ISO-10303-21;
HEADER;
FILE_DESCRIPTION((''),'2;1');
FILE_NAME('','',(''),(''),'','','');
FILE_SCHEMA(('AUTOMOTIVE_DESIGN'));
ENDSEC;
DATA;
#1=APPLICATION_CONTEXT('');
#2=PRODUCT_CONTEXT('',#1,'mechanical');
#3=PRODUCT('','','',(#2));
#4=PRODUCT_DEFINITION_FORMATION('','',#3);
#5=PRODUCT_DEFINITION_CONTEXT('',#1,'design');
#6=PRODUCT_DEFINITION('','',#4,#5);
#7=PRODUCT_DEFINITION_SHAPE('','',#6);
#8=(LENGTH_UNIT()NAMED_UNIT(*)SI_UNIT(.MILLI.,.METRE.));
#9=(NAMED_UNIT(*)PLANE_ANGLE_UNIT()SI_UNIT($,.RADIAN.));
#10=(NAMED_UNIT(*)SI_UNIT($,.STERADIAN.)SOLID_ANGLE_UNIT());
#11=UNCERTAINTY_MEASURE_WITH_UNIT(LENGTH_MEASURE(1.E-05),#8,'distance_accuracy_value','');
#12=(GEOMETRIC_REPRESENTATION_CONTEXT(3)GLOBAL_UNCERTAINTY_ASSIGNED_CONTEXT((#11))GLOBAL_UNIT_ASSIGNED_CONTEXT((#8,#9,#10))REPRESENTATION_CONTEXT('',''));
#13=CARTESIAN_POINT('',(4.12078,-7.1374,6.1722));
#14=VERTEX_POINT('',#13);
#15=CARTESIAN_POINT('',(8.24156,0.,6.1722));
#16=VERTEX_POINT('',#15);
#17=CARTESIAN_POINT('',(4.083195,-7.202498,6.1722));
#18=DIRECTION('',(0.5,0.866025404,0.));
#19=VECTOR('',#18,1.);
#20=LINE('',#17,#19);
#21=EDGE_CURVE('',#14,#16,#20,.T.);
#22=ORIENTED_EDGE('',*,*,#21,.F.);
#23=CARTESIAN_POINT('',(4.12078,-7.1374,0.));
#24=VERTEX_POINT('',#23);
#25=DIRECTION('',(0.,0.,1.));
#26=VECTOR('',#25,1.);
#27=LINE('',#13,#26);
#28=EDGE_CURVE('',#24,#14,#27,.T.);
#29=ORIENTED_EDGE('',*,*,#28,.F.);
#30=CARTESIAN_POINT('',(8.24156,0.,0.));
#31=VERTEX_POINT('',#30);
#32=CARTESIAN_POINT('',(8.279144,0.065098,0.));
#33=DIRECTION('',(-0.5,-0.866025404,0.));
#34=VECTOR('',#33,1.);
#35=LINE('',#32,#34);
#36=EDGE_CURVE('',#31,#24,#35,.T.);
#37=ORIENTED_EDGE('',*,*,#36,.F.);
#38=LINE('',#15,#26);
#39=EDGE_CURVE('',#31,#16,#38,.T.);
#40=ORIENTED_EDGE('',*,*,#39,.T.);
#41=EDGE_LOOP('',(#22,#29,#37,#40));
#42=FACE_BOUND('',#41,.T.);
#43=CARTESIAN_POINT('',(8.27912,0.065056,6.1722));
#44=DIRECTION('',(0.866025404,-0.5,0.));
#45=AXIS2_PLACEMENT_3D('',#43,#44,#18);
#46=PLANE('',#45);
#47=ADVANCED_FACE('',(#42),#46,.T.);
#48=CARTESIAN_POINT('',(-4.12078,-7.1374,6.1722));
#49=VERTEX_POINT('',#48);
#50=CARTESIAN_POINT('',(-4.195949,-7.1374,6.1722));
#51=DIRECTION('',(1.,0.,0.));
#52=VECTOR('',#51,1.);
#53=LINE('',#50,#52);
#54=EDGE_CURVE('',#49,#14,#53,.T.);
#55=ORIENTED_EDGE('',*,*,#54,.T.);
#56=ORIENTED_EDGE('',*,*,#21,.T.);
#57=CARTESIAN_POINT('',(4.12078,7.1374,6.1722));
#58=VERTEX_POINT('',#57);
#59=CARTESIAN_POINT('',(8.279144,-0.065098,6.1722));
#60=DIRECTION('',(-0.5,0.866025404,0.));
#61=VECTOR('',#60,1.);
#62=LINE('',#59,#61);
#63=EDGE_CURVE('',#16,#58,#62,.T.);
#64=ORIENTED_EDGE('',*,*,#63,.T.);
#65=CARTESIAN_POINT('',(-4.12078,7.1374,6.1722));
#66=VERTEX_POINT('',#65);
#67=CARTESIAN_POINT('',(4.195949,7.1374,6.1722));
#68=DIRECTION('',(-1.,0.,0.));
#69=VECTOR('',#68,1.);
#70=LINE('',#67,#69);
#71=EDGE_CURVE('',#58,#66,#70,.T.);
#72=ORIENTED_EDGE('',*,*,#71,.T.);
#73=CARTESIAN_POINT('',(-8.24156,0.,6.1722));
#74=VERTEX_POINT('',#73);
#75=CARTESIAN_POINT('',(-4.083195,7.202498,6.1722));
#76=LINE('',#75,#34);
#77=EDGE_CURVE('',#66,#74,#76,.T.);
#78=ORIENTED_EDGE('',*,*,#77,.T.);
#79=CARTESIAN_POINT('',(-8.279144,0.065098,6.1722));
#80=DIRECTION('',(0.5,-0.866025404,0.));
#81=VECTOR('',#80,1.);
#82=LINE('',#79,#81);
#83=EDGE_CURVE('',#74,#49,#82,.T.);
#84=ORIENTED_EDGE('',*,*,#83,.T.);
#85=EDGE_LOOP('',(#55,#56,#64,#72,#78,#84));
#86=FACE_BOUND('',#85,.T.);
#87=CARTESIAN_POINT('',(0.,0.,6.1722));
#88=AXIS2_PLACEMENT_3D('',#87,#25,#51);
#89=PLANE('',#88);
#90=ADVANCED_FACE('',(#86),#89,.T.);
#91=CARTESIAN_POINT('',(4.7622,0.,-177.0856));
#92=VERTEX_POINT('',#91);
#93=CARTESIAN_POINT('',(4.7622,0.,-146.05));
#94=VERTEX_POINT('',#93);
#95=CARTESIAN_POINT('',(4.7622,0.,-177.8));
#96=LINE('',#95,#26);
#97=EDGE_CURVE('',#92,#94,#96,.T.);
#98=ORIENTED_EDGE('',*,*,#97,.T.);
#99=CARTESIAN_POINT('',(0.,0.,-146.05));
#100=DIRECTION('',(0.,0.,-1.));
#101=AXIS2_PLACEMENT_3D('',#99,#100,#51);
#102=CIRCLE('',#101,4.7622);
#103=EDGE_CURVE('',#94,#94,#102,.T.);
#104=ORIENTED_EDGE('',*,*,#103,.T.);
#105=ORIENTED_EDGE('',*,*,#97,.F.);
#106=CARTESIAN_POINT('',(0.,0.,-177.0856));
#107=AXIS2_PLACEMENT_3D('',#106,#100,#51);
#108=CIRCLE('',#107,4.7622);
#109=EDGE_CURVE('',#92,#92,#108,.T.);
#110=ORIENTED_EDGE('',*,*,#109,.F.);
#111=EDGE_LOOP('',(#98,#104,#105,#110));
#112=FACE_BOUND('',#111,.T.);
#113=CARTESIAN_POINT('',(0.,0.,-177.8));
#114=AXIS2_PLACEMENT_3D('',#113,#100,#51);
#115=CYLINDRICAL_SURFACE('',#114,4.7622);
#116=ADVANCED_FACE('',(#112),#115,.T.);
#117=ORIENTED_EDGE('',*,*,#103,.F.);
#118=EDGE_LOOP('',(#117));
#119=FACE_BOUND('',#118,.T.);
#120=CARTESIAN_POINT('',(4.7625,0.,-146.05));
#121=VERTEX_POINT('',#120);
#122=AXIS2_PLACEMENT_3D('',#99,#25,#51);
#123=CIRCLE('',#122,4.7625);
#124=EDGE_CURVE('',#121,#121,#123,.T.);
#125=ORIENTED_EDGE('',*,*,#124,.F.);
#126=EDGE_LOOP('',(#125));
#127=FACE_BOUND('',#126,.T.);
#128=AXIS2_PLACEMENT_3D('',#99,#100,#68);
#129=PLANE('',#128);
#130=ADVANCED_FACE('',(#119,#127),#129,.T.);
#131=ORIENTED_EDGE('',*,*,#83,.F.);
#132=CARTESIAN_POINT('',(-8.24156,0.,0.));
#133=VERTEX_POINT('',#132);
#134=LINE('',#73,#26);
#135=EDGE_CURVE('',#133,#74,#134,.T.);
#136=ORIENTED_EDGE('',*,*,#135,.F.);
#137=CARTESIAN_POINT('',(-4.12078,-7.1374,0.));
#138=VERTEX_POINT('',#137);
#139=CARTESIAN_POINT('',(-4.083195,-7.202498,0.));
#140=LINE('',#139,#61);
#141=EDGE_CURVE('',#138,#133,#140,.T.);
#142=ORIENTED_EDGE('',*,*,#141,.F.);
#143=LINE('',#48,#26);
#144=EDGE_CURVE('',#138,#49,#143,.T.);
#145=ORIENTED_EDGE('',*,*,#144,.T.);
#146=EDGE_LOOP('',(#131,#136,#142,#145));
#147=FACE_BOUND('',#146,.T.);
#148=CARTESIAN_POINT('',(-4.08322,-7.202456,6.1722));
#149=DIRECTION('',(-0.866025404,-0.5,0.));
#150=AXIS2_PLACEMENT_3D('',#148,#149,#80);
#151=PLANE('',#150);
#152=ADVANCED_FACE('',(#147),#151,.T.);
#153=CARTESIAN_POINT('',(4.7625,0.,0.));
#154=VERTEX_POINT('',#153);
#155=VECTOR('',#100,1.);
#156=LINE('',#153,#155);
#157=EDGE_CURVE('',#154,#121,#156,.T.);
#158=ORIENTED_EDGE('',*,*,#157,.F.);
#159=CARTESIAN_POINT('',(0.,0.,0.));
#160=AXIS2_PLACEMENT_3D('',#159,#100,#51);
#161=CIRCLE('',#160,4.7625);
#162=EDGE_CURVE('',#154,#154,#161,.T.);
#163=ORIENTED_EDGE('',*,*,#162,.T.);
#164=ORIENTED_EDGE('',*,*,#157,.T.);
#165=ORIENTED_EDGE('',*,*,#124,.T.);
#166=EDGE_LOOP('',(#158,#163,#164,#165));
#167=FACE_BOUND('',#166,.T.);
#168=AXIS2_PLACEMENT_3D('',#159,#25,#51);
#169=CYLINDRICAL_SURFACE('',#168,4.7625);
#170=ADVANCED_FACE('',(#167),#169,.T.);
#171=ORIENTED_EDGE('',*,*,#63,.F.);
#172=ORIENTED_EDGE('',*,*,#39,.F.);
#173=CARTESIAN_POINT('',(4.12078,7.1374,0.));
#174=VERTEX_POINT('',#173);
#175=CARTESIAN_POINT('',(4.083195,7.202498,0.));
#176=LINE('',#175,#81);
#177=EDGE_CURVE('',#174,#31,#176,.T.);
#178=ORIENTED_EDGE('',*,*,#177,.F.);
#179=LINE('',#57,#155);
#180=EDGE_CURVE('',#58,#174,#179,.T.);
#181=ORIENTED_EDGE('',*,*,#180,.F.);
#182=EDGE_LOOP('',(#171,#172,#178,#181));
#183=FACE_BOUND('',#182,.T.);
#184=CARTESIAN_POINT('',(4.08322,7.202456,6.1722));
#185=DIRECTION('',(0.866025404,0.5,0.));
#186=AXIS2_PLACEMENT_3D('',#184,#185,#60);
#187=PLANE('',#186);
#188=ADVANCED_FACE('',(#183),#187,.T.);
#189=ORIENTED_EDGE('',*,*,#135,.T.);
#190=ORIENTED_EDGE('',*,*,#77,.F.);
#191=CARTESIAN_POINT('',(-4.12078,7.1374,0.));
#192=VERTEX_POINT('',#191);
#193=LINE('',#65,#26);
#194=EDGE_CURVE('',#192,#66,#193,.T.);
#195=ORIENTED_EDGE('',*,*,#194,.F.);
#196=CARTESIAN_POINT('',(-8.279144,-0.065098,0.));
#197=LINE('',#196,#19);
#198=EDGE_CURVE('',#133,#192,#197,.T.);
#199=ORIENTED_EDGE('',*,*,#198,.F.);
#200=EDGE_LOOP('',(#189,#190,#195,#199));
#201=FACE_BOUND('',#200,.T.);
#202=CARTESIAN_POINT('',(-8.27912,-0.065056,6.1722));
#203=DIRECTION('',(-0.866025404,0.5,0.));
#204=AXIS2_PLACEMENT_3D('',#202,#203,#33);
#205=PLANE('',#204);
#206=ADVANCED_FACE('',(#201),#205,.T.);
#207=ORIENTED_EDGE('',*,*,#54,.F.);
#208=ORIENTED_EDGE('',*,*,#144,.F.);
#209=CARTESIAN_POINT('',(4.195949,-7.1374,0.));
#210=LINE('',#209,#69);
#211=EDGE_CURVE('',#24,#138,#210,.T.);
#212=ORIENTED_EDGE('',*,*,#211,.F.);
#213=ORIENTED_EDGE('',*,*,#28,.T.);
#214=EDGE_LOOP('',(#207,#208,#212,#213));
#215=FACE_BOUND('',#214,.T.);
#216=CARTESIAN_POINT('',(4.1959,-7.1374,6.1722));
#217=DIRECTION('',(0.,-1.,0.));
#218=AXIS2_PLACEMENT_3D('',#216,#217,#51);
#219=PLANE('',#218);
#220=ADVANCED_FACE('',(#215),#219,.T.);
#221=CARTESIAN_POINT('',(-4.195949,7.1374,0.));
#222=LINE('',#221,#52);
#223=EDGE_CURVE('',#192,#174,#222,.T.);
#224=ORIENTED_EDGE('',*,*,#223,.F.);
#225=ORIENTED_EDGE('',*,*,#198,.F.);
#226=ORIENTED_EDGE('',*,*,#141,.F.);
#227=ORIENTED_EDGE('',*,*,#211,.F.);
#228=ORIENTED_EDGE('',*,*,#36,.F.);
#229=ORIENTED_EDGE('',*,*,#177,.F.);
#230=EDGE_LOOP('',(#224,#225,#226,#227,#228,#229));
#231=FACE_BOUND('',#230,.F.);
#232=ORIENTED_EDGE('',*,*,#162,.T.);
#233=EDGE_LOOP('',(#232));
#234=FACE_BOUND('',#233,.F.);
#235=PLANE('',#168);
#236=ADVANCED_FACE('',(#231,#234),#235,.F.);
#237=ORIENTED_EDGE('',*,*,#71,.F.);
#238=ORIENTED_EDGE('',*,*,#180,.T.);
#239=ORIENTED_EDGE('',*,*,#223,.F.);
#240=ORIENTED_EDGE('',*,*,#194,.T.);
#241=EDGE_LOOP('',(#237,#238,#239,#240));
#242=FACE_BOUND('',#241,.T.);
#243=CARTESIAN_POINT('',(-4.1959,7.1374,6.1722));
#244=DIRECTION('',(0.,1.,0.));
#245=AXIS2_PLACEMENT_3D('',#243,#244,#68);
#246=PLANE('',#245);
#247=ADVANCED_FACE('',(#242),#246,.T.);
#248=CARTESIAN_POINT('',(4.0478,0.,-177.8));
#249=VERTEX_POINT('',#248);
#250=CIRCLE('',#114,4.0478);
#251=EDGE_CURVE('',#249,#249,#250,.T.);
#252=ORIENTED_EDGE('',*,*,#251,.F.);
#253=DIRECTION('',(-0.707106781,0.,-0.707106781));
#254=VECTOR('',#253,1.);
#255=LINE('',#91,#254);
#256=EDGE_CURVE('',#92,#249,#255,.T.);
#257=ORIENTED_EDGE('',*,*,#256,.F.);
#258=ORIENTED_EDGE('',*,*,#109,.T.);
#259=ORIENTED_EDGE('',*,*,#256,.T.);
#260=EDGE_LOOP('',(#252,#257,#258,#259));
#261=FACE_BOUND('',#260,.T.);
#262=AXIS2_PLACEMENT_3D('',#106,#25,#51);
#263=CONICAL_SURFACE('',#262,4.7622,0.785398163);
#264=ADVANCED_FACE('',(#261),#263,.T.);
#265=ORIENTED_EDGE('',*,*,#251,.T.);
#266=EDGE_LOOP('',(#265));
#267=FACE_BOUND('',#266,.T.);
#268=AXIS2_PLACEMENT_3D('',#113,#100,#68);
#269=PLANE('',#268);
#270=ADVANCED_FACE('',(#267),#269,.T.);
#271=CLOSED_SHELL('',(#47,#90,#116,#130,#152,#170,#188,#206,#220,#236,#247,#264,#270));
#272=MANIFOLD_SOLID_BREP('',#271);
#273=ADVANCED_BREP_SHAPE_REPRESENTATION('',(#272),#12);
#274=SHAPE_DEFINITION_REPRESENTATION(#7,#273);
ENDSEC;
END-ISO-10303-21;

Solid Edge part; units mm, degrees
sketch "Sketch1" plane through (0, 0, 0) normal (0, 0, 1) x (1, 0, 0)
  circle A0 centre (0, 0) radius 8.2794
  dimension "D1" = 16.5588
extrude "Protrusion1" add sketch "Sketch1" along normal blind 6.1722
sketch "Sketch2" plane through (0, 0, 0) normal (0, 0, -1) x (1, 0, 0)
  circle A0 centre (0, 0) radius 4.7625
extrude "Protrusion2" add sketch "Sketch2" along normal blind 177.8
sketch "Sketch3" plane through (0, 0, -177.8) normal (0, 0, -1) x (1, 0, 0)
  circle A0 centre (0, 0) radius 4.7622
extrude "Cutout1" cut sketch "Sketch3" against normal blind 31.75 flip side to cut
chamfer "Chamfer_1" distance 0.7144 angle 45 1 edges at (-4.7622, 0, -177.8)
sketch "Sketch4" plane through (0, 0, 6.1722) normal (0, 0, 1) x (1, 0, 0)
  line L0 (-4.1959, 7.1374) -> (4.1959, 7.1374)
  dimension "D1" = 14.2748
extrude "Cutout2" cut sketch "Sketch4" against normal up to next material side at (0, 7.1874, 6.1722)
pattern_circular "Pattern1" count 6 over 360 about axis through (0, 0, 6.1722) along (0, 0, 1) of "Cutout2"
properties part number "24102291"
